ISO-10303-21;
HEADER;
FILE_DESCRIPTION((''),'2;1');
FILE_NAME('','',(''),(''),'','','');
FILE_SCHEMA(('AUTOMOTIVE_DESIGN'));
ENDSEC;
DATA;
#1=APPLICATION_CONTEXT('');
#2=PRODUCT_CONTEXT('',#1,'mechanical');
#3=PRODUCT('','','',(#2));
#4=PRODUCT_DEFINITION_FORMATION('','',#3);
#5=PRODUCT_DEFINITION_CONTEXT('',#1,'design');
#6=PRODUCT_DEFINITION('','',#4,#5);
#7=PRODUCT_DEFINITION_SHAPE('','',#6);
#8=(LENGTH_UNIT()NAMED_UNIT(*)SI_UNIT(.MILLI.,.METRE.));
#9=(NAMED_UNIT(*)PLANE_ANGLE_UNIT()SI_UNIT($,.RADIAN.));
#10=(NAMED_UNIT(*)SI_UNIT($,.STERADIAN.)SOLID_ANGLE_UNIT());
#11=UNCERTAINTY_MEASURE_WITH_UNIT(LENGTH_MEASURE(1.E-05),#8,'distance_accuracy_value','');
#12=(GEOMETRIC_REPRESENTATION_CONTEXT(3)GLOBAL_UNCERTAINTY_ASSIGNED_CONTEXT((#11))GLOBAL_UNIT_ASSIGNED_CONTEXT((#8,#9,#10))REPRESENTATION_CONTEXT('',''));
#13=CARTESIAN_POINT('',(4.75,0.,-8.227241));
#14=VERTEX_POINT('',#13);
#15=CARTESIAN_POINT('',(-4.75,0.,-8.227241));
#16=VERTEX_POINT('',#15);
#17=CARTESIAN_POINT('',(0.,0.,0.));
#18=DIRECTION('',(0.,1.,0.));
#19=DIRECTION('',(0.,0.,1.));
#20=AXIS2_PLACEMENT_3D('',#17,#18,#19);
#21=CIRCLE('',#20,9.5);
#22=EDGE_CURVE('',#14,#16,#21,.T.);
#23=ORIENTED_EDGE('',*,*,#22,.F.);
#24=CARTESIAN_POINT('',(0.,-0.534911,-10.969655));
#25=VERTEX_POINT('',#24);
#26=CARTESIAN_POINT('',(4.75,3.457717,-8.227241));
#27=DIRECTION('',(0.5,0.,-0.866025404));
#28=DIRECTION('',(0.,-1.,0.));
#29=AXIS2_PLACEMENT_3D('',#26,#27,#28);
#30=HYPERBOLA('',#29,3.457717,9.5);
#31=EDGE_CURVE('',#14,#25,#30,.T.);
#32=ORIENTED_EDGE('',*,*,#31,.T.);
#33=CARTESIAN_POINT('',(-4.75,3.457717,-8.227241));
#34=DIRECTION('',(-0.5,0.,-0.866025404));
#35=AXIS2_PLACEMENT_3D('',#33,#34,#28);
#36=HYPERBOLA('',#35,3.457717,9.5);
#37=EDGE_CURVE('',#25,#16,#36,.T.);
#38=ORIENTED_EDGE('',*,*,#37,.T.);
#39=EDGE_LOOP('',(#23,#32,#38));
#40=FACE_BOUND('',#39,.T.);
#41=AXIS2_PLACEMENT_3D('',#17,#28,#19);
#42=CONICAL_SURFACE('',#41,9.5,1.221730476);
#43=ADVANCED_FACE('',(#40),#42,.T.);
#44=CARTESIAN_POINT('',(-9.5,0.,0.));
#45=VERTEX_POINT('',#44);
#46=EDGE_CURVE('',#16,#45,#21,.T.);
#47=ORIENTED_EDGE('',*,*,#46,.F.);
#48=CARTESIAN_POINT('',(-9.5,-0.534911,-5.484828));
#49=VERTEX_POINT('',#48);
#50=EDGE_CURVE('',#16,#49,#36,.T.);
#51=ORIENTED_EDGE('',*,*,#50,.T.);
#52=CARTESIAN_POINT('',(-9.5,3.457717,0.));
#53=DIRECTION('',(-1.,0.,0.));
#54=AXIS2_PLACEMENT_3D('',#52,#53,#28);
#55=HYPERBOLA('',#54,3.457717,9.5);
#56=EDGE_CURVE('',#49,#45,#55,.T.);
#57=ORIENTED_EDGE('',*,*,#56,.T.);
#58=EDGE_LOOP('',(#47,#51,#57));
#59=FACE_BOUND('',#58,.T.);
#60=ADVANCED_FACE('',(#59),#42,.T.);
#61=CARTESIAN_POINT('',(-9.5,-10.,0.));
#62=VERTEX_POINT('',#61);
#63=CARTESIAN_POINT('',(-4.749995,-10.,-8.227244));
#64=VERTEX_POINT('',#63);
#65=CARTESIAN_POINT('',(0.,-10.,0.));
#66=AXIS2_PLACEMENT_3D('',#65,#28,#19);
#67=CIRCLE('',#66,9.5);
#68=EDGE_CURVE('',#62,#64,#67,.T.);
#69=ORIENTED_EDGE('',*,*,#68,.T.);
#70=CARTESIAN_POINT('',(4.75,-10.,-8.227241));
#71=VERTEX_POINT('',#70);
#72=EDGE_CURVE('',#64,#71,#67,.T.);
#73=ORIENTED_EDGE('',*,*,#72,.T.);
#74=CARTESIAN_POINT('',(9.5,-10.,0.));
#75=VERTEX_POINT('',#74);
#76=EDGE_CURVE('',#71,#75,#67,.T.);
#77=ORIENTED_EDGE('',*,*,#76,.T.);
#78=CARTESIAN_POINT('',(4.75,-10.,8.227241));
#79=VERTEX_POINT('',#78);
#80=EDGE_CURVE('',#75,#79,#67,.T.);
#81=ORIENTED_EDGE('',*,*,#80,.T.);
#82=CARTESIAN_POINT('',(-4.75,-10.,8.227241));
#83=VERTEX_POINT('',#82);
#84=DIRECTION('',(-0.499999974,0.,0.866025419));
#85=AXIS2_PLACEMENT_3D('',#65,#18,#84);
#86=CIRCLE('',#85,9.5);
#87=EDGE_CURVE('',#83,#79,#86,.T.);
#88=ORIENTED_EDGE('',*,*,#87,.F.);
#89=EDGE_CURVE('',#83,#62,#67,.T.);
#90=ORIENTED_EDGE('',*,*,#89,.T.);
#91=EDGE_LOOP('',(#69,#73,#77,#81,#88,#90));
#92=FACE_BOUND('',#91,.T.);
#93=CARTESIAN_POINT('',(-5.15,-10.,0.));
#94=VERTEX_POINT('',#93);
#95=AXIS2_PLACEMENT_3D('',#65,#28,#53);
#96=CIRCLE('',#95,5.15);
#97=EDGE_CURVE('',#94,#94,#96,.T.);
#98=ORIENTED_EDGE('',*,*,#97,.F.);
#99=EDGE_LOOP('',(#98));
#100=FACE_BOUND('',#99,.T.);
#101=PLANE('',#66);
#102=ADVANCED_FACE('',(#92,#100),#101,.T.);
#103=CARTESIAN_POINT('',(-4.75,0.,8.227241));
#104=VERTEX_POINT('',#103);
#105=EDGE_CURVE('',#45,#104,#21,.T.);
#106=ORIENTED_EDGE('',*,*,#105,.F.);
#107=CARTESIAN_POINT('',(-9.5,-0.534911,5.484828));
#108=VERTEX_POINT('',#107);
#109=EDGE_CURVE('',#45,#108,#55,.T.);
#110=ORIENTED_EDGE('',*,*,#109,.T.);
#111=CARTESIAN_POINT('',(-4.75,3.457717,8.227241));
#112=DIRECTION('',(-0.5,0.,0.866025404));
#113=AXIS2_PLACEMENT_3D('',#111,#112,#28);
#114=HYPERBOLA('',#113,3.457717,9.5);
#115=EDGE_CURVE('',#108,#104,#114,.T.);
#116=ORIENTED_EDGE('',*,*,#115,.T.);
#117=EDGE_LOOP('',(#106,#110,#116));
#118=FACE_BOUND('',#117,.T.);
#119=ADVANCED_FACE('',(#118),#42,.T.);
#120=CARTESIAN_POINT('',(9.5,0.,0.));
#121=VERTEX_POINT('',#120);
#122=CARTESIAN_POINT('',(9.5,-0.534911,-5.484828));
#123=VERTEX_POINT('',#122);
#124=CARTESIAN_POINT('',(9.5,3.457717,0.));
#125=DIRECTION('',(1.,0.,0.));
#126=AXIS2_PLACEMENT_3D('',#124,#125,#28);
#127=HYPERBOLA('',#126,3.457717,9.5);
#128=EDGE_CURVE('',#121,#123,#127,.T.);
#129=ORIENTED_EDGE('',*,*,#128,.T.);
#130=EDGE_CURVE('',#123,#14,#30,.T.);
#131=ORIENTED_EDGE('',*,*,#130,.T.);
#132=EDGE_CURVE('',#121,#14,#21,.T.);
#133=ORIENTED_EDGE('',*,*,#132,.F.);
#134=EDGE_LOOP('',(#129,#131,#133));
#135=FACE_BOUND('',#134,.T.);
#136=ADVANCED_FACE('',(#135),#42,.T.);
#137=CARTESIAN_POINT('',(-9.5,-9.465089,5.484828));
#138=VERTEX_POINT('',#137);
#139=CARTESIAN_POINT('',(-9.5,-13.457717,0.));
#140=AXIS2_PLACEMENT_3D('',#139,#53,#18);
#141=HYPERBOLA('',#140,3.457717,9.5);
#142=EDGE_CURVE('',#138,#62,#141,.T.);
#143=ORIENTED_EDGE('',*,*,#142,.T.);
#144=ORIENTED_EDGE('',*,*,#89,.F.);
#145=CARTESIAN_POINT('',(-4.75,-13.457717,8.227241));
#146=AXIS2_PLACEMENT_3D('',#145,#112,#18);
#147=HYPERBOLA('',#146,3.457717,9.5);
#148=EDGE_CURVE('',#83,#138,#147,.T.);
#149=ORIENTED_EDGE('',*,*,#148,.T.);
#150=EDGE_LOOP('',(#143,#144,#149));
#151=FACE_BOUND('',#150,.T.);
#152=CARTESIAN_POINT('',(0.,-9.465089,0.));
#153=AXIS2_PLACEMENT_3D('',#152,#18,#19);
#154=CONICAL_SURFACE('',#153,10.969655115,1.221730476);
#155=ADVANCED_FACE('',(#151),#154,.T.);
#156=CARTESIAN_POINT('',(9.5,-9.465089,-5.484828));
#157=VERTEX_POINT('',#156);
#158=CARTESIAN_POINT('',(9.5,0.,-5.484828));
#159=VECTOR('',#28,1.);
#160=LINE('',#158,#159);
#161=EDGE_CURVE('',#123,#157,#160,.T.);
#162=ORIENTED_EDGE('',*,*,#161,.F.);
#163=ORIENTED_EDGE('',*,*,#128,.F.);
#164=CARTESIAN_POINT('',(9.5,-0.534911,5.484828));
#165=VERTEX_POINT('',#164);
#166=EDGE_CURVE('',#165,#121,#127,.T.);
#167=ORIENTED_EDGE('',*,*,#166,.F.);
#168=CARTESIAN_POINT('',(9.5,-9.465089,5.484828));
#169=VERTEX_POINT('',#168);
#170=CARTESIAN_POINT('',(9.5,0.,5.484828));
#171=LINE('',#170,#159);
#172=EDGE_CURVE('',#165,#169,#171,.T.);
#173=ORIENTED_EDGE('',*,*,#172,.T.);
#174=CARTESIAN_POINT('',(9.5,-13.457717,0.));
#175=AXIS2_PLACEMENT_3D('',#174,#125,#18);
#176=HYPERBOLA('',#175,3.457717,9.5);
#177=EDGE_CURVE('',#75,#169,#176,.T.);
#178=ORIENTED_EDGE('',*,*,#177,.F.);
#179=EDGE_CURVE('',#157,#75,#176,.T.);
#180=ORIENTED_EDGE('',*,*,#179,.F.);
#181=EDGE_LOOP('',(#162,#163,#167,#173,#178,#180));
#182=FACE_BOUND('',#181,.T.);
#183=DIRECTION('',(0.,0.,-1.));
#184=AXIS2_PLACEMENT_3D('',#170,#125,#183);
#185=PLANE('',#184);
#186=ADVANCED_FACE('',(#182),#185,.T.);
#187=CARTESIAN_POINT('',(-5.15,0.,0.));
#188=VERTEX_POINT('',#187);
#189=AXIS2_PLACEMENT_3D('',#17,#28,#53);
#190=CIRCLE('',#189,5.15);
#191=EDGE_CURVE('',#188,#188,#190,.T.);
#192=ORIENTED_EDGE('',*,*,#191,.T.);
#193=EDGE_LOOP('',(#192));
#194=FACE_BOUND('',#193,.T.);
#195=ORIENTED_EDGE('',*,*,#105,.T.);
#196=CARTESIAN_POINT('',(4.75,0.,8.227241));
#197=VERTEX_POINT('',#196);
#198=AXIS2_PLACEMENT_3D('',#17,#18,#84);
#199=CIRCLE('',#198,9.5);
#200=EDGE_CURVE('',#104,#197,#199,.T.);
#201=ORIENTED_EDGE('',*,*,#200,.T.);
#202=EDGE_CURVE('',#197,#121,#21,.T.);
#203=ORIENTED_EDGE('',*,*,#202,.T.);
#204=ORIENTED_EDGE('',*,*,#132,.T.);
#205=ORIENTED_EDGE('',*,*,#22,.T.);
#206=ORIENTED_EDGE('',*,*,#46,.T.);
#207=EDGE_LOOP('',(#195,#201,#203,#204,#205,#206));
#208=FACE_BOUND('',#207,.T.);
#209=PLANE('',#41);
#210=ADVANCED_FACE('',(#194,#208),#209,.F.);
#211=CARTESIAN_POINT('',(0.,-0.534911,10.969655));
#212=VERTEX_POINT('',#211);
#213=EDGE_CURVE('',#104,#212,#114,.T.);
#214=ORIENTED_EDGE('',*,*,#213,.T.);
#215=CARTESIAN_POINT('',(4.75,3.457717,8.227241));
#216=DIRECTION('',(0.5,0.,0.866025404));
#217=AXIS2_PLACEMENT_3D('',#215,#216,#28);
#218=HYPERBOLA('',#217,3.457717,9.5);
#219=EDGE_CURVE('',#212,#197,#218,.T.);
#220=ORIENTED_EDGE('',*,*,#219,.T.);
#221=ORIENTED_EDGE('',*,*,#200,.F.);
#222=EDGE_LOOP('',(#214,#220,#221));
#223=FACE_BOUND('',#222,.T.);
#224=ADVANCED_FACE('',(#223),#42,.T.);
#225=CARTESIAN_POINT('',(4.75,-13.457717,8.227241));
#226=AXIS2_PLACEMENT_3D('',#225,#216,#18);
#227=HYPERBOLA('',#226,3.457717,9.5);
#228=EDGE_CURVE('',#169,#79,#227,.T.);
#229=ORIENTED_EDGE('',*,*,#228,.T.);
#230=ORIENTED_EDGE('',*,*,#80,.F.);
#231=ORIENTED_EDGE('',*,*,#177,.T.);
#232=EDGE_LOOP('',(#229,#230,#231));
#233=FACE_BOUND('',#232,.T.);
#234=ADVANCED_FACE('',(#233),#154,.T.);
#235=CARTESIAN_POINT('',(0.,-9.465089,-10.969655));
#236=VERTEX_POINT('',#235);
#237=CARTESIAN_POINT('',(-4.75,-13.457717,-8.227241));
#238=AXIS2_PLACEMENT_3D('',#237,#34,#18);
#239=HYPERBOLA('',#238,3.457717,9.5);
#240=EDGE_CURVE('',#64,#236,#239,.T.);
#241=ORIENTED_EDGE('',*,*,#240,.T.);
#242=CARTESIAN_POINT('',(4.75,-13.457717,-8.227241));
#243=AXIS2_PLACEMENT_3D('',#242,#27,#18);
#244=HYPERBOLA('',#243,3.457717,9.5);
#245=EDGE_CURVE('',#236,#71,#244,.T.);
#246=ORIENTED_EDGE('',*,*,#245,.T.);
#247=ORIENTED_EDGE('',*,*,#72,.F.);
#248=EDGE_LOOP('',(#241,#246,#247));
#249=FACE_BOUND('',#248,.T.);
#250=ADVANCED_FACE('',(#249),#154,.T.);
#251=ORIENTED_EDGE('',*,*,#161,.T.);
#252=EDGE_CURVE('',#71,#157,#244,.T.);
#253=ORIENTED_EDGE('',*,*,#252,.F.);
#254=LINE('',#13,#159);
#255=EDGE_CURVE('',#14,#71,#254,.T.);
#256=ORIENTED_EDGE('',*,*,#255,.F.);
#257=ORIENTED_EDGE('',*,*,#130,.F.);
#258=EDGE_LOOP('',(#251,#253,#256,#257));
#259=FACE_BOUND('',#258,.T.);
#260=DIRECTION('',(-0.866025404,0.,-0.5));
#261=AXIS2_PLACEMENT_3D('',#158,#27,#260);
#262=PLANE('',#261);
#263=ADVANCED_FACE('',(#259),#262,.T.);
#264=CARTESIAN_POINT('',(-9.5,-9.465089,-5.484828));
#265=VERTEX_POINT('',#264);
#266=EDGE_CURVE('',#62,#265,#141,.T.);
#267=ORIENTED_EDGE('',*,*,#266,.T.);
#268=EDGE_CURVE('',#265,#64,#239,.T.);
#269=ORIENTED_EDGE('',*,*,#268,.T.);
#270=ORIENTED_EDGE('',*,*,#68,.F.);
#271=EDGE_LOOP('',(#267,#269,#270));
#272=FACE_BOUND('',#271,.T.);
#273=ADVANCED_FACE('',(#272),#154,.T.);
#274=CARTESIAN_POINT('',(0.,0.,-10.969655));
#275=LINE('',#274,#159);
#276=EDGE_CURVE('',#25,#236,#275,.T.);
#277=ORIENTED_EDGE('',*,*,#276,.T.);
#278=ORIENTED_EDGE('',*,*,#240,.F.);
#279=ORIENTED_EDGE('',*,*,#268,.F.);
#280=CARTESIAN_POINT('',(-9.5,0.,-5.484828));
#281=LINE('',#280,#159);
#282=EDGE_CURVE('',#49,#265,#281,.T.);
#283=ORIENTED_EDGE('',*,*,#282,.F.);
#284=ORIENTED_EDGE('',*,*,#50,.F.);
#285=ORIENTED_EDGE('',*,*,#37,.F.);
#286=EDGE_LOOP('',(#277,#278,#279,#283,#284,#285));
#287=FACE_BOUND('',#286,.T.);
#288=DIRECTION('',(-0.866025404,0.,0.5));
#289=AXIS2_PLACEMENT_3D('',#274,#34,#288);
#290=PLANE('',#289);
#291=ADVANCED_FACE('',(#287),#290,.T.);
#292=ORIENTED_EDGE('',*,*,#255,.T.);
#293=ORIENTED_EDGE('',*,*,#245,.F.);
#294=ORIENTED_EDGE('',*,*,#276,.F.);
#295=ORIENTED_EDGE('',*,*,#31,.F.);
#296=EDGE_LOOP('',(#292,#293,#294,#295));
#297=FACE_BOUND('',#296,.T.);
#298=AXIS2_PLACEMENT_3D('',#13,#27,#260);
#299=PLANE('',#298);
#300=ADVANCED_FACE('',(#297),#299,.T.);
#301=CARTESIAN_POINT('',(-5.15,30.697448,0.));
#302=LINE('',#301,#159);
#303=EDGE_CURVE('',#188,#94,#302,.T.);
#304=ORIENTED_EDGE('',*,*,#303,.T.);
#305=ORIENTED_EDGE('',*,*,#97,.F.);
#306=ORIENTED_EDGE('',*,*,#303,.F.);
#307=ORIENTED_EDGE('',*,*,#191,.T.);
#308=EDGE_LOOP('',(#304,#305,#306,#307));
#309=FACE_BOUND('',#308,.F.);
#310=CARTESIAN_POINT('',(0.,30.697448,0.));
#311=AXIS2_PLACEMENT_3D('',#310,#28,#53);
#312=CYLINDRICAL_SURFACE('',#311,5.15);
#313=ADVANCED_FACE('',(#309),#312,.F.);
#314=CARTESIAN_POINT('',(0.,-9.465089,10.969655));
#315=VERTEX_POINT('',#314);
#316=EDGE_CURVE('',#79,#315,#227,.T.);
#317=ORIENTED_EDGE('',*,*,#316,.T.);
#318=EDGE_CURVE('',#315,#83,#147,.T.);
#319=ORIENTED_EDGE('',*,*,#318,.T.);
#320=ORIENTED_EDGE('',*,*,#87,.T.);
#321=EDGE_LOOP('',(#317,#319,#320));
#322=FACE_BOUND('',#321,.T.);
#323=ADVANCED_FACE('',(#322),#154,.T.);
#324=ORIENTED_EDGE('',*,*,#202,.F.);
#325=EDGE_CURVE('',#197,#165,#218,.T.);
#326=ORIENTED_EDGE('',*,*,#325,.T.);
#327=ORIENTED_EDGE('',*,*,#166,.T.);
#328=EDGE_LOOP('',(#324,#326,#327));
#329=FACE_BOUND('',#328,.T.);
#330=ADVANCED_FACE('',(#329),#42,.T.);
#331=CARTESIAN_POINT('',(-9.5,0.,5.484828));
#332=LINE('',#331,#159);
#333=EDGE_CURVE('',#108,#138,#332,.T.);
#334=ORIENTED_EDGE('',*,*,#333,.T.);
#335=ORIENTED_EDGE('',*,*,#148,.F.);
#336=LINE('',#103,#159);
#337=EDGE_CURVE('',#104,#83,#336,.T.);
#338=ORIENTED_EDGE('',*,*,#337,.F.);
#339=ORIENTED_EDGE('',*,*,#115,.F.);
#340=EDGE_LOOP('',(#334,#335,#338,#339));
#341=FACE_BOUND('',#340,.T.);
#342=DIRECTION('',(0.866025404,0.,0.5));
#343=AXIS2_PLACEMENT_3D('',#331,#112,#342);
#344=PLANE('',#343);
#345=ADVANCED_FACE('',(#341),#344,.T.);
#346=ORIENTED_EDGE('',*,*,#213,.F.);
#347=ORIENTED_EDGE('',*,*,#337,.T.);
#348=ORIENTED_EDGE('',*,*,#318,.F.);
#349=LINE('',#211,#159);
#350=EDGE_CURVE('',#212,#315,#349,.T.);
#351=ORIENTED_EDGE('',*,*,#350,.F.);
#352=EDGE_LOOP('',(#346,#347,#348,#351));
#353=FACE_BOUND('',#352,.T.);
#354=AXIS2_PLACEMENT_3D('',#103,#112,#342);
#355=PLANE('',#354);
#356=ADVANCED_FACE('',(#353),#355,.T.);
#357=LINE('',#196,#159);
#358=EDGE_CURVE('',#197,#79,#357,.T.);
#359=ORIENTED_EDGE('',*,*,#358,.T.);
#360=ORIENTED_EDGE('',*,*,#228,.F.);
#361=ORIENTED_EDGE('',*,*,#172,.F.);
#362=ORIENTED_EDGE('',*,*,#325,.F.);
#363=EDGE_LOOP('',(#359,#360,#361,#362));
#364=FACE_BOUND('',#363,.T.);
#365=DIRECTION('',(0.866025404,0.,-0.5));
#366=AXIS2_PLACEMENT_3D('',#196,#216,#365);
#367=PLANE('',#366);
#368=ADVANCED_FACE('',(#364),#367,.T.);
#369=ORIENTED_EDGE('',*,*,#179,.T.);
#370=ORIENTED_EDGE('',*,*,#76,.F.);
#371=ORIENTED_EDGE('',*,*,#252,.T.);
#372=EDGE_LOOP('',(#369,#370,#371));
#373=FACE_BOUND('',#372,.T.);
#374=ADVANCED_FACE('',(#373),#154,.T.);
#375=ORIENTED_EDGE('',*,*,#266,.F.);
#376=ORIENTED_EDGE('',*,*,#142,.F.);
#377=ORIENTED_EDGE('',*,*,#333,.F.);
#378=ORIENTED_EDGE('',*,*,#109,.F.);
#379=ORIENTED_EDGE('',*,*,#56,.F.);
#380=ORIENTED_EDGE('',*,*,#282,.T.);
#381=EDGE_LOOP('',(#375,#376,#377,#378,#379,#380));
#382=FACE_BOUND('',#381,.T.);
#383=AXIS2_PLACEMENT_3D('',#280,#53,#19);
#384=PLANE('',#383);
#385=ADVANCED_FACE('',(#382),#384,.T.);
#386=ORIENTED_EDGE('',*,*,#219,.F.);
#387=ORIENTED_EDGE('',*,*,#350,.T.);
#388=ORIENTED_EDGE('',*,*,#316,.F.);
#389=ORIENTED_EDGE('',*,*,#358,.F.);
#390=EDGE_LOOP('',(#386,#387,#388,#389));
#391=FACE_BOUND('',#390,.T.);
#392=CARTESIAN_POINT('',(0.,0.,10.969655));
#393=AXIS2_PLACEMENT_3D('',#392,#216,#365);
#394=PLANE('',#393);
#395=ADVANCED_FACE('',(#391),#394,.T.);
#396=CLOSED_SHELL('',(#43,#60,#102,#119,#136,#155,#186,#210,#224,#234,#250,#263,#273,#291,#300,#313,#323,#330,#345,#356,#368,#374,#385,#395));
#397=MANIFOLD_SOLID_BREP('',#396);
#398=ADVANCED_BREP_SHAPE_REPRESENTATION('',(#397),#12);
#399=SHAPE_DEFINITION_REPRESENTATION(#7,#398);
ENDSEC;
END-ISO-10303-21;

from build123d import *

# Parameters (mm, degrees)
F3_DEPTH      = 38
F3_DEPTH_BACK = 10.001
F4_D          = 10.3


# Not quite as in the source:
# - an extrude ends at something that could not be found from the text; its depth is read off the source's solid


with BuildPart() as f2:
    # F1 (on Right) → F2 (revolve)
    with BuildSketch(Plane.YZ):
        Polygon((-10, 0), (0, 0), (0, 9.5), (-0.5349107164, 10.9696551146), (-9.4650892836, 10.9696551146), (-10, 9.5), align=None)
    revolve(axis=Axis((0, -5, 0), (0, -1, 0)))

    # F0 (on Front) → F3 (cut, two sides)
    with BuildSketch(Plane.XZ) as f3_sk:
        with BuildLine():
            Line((-9.5, 5.4848275573), (-4.7499997575, 8.227241476))
            Line((-4.7499997575, 8.227241476), (0, 10.9696551146))
            ThreePointArc((0, 10.9696551146), (-5.4848275573, 9.5), (-9.5, 5.4848275573))
        make_face()
        with BuildLine():
            Line((-9.5, -5.4848275573), (-9.5, 0))
            Line((-9.5, 0), (-9.5, 5.4848275573))
            ThreePointArc((-9.5, 5.4848275573), (-10.9696551146, 0), (-9.5, -5.4848275573))
        make_face()
        with BuildLine():
            Line((0, 10.9696551146), (4.7500001405, 8.2272412548))
            Line((4.7500001405, 8.2272412548), (9.5, 5.4848275573))
            ThreePointArc((9.5, 5.4848275573), (5.4848275573, 9.5), (0, 10.9696551146))
        make_face()
        with BuildLine():
            Line((9.5, 5.4848275573), (9.5, 0))
            Line((9.5, 0), (9.5, -5.4848275573))
            ThreePointArc((9.5, -5.4848275573), (10.5958731807, -2.8391556619), (10.9696551146, 0))
            ThreePointArc((10.9696551146, 0), (10.5958731807, 2.8391556619), (9.5, 5.4848275573))
        make_face()
        with BuildLine():
            Line((9.5, -5.4848275573), (4.7500001405, -8.2272412548))
            Line((4.7500001405, -8.2272412548), (0, -10.9696551146))
            ThreePointArc((0, -10.9696551146), (5.4848275573, -9.5), (9.5, -5.4848275573))
        make_face()
        with BuildLine():
            Line((0, -10.9696551146), (-4.7499999942, -8.2272413393))
            Line((-4.7499999942, -8.2272413393), (-9.5, -5.4848275573))
            ThreePointArc((-9.5, -5.4848275573), (-5.4848275573, -9.5), (0, -10.9696551146))
        make_face()
    extrude(amount=-F3_DEPTH, mode=Mode.SUBTRACT)
    extrude(f3_sk.sketch, amount=F3_DEPTH_BACK, mode=Mode.SUBTRACT)

    # F4 (through all)
    with Locations(Plane(origin=(0, 0, 0), x_dir=(1, 0, 0), z_dir=(0, 1, 0))):
        with Locations((0, 0)):
            Hole(F4_D / 2)


solid = f2.part
